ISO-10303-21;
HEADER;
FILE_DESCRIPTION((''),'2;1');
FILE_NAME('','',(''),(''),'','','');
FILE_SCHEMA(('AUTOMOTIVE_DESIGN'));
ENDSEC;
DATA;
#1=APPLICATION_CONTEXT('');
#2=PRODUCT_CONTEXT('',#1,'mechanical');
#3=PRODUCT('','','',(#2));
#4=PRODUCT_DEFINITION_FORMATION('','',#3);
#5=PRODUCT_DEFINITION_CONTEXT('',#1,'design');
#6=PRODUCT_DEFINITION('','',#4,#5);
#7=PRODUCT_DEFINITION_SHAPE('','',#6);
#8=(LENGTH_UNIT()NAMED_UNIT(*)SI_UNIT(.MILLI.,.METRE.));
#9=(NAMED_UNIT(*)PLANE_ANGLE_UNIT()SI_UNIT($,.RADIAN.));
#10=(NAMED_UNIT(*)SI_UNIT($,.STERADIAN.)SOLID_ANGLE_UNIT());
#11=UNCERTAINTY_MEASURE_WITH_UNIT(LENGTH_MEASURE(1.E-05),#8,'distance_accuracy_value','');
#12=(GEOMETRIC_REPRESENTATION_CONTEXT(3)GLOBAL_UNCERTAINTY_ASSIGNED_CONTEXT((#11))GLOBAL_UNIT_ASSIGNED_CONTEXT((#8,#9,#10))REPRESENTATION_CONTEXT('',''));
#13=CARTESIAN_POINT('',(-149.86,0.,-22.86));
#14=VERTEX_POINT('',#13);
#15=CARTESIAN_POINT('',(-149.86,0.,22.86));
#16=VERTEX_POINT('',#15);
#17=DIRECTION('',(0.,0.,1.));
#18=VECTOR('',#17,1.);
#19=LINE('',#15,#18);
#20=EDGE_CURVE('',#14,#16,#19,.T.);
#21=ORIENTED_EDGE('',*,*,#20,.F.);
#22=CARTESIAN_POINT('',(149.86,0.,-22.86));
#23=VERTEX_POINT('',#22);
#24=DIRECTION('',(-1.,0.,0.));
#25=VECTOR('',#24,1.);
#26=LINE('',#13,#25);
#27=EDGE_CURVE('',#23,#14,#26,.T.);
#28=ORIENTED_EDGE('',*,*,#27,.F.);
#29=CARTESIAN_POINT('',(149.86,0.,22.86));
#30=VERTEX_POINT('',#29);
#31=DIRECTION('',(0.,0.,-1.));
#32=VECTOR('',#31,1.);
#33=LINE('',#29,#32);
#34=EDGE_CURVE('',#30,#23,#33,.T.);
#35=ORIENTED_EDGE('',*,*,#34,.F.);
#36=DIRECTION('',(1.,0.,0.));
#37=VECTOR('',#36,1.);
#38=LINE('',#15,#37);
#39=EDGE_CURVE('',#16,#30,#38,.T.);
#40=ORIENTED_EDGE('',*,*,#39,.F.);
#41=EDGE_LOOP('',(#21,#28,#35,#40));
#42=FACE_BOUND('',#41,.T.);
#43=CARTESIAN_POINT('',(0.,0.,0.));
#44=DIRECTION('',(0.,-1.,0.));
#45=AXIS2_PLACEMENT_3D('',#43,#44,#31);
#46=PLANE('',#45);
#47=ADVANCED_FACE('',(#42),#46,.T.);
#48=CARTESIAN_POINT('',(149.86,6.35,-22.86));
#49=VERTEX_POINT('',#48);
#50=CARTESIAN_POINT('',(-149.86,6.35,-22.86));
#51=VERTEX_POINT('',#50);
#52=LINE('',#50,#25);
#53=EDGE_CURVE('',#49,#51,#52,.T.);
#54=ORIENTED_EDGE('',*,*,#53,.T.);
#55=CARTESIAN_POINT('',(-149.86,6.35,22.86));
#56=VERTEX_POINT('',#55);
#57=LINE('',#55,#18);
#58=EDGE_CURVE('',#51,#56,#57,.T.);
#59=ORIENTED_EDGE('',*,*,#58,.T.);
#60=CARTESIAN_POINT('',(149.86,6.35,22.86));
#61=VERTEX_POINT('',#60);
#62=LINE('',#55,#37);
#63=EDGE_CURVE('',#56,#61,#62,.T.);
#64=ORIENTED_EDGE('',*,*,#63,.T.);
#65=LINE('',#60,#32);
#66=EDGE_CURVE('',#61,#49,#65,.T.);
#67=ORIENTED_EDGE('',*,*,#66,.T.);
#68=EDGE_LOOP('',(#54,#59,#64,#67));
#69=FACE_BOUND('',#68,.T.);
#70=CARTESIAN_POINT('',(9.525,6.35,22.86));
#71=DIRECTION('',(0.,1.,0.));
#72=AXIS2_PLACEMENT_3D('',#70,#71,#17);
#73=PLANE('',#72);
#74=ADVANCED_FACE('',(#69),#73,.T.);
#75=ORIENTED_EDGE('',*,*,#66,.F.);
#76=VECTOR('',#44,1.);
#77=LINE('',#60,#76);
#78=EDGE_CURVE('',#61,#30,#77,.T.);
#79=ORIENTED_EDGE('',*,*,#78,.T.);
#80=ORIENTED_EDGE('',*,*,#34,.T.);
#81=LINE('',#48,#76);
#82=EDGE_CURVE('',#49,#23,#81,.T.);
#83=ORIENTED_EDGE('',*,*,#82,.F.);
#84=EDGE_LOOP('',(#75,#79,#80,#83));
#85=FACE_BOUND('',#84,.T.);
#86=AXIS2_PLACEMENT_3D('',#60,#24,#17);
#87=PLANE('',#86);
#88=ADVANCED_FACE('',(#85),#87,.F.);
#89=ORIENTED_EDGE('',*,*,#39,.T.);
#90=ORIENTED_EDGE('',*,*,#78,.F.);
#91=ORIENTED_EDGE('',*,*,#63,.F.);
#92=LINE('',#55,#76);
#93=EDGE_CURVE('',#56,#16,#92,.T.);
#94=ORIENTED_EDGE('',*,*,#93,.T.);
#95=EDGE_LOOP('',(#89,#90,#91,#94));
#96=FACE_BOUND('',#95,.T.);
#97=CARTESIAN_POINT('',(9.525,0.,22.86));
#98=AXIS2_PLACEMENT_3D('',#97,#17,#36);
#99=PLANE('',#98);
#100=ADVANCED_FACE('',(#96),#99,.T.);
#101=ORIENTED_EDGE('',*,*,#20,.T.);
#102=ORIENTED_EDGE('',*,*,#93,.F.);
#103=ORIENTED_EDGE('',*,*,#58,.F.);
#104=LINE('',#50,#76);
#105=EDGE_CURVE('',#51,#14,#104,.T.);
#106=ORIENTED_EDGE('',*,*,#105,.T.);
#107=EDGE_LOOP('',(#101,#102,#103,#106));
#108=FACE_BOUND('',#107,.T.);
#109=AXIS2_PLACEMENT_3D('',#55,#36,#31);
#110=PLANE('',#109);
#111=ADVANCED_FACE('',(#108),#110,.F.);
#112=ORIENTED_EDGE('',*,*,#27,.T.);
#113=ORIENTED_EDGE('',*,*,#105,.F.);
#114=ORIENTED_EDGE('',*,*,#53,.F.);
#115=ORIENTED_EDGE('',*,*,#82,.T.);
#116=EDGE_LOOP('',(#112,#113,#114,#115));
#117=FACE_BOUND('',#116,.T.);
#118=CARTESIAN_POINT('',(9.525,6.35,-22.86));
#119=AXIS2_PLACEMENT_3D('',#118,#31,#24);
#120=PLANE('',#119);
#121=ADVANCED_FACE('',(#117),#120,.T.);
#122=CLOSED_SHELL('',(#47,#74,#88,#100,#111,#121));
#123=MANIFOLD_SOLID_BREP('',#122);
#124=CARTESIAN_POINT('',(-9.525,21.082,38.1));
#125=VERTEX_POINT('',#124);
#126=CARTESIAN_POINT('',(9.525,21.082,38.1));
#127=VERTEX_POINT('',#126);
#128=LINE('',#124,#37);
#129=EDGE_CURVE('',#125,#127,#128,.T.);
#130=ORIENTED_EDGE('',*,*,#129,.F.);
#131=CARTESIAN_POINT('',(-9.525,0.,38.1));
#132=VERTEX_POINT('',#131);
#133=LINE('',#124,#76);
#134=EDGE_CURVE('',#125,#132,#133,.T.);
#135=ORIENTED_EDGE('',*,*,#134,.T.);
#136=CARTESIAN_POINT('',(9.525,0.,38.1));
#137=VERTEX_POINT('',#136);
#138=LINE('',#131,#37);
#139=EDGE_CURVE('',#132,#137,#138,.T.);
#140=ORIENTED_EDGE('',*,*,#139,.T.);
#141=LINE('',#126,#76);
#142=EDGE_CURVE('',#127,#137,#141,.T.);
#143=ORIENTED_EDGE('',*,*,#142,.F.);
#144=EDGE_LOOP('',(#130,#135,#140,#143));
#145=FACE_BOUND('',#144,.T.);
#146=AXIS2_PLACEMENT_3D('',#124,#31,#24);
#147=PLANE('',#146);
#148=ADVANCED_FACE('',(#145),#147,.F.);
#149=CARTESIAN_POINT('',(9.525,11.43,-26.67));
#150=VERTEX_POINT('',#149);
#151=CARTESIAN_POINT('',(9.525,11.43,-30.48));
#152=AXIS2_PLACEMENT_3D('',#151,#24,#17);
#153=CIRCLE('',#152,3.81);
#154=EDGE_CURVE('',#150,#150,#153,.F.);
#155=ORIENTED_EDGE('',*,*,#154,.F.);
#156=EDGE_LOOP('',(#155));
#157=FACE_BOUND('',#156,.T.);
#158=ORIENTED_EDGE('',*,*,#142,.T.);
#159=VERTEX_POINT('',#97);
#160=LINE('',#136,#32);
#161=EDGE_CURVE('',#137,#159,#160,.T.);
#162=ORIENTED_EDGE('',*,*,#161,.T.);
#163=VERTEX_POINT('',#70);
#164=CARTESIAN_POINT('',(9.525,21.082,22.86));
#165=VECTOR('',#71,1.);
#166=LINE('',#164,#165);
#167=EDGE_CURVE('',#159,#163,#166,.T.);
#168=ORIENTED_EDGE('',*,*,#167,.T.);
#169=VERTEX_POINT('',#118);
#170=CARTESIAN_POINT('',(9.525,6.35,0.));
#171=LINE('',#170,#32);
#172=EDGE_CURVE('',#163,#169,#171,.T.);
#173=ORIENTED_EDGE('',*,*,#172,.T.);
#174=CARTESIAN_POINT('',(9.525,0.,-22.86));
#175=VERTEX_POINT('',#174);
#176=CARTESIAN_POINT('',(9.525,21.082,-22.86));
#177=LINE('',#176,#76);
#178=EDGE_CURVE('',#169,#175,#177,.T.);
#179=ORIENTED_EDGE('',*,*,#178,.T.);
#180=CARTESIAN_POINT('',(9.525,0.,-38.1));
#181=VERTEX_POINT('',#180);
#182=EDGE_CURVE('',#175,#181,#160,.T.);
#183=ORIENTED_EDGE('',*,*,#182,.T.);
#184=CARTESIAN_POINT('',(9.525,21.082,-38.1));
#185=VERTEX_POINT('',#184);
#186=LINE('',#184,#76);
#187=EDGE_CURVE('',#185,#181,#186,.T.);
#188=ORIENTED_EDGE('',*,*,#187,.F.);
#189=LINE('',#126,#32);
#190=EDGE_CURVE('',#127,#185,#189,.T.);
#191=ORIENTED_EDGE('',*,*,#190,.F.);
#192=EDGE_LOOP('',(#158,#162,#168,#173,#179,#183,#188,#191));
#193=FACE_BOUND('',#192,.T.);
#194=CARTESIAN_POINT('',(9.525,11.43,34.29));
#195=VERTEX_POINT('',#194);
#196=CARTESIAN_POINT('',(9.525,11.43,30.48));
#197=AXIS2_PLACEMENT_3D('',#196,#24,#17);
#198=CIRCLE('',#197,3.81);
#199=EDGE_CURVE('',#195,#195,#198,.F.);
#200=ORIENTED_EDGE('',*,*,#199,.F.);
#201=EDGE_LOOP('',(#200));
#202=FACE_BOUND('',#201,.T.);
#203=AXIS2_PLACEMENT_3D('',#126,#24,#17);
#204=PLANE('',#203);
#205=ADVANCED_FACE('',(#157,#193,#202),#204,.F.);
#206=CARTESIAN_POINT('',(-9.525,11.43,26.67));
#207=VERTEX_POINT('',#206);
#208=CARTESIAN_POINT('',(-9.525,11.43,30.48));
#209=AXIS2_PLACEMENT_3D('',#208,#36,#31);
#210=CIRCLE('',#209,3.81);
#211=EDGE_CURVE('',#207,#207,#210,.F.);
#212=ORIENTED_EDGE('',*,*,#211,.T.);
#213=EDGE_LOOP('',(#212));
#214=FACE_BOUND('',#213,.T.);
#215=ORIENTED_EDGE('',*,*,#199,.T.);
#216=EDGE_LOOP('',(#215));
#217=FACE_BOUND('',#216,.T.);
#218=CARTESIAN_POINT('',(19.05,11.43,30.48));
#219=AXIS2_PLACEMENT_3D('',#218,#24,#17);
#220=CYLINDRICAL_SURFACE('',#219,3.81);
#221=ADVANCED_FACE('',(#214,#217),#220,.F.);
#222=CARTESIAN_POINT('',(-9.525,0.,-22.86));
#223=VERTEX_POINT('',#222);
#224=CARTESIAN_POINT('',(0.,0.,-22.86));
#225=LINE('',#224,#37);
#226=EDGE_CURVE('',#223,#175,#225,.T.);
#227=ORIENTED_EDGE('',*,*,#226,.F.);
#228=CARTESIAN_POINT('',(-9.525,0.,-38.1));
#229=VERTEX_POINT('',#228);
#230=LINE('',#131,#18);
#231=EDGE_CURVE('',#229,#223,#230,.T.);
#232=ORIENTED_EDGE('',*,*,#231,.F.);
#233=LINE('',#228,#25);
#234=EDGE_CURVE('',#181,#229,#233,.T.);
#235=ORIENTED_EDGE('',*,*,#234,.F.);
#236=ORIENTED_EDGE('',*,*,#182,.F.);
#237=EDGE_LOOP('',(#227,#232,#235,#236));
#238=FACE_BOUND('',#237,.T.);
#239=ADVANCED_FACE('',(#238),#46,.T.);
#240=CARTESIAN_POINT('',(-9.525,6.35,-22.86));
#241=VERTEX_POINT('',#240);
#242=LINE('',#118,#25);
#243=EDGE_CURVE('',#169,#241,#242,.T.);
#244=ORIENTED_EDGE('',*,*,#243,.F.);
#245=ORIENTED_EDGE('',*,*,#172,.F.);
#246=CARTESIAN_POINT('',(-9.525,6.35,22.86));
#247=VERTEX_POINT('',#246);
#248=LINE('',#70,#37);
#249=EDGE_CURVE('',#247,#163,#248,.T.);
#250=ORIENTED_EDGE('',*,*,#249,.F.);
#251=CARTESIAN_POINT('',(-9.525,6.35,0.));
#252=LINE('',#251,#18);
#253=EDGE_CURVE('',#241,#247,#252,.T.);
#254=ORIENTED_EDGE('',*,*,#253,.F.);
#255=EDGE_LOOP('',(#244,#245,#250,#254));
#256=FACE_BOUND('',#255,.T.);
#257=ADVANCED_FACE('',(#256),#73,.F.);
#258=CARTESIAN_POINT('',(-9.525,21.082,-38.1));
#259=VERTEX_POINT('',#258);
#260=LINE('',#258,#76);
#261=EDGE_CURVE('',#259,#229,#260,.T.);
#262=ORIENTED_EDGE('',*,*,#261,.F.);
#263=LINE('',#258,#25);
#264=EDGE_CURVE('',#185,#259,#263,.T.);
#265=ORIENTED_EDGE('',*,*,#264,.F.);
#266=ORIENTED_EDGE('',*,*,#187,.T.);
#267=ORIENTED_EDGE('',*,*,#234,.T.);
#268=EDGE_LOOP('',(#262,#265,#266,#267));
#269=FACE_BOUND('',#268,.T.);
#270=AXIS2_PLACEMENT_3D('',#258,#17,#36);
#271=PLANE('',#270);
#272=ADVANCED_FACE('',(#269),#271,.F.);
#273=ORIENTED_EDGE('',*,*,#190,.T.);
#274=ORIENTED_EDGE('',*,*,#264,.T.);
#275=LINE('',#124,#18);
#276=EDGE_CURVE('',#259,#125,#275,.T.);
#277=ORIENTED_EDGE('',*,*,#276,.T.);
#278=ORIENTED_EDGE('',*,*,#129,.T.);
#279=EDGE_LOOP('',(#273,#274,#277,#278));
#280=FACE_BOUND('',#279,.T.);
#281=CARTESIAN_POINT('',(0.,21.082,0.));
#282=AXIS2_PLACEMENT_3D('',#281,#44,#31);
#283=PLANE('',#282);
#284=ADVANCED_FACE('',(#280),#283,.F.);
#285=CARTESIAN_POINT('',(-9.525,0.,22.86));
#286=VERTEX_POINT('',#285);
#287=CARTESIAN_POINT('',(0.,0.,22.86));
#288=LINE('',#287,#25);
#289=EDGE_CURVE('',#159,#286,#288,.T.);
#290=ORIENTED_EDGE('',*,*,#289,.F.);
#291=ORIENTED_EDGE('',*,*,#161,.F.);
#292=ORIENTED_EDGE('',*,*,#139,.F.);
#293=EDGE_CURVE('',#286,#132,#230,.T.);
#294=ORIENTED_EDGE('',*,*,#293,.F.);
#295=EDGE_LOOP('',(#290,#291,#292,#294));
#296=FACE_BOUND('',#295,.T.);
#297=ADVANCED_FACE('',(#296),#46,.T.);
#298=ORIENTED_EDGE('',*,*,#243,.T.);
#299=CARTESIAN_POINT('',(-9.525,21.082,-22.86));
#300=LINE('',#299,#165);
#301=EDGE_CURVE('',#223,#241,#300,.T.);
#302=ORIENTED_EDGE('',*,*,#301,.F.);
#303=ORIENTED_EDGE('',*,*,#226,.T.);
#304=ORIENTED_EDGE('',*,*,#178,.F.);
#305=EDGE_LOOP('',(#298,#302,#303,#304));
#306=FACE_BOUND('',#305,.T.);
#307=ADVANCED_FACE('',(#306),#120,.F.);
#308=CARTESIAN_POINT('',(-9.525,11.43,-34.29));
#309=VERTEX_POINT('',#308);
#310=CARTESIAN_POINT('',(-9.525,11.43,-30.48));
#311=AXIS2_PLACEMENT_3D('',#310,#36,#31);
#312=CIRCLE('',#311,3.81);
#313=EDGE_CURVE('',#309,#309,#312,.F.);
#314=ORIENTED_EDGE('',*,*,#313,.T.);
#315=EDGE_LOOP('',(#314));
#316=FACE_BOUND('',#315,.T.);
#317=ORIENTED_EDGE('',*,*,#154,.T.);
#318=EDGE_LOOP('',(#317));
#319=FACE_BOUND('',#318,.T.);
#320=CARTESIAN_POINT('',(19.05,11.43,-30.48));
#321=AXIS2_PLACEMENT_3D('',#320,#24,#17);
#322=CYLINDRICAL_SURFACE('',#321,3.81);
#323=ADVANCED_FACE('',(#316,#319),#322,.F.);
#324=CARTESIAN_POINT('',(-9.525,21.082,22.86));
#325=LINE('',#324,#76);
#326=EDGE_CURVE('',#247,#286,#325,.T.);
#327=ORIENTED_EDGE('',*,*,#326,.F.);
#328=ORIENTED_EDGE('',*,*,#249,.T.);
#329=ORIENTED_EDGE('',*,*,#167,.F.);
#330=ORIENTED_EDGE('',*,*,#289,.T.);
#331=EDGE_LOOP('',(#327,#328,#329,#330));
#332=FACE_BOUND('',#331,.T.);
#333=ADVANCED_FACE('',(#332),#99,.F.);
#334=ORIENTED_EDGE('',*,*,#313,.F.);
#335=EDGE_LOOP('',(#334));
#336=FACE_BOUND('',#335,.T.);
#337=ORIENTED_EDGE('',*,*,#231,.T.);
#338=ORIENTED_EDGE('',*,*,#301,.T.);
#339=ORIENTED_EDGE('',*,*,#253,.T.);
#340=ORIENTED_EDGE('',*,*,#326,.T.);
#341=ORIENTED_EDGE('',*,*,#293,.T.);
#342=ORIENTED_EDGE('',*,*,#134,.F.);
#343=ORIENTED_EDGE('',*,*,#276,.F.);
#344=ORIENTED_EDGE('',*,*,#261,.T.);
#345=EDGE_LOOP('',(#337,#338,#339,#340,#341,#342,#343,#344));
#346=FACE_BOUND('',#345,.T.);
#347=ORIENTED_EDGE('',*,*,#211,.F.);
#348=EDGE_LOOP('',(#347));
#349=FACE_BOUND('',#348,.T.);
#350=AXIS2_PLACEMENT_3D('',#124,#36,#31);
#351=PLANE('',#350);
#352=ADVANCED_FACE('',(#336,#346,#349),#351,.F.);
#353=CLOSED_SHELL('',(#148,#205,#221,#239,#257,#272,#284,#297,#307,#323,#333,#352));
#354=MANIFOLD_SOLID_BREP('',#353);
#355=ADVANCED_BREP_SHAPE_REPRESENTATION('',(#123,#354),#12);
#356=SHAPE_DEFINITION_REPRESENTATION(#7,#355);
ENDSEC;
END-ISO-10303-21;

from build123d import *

# Parameters (mm, degrees)
SKETCH1_W            = 299.72
SKETCH1_H            = 45.72
SPRING_PLATE_DEPTH   = 6.35
SKETCH2_W            = 19.05
SKETCH2_H            = 76.2
SLOT_TAB_DEPTH       = 21.082
SPLIT1_START         = 6.35
SPLIT1_OUTLINE_W     = 19.05
SPLIT1_OUTLINE_H     = 76.2
SPLIT1_DEPTH         = 14.732
SPLIT1_2_OUTLINE_W   = 19.05
SPLIT1_2_OUTLINE_H   = 15.24
SPLIT1_2_DEPTH       = 6.35
SPLIT1_3_OUTLINE_W   = 19.05
SPLIT1_3_OUTLINE_H   = 76.2
SPLIT1_3_DEPTH       = 14.732
SPLIT1_4_OUTLINE_W   = 19.05
SPLIT1_4_OUTLINE_H   = 15.24
SPLIT1_4_DEPTH       = 6.35
ROD_SLOTS_DEPTH      = 19.05
ROD_SLOTS_DEPTH_BACK = 14.732
SKETCH3_R            = 3.81


# Read off the part's stored shape, not the designer's step: Split1
with BuildPart() as part:
    # Sketch1 → Spring Plate (new body)
    with BuildSketch(Plane(origin=(0, 0, 0), x_dir=(1, 0, 0), z_dir=(0, 1, 0))):
        Rectangle(SKETCH1_W, SKETCH1_H)
    extrude(amount=SPRING_PLATE_DEPTH)

    # Sketch2 → Slot Tab (add)
    with BuildSketch(Plane(origin=(0, 0, 0), x_dir=(1, 0, 0), z_dir=(0, 1, 0))):
        Rectangle(SKETCH2_W, SKETCH2_H)
    extrude(amount=SLOT_TAB_DEPTH)

    # Split1 outline → Split1 (cut)
    with BuildSketch(Plane(origin=(0, 0, 0), x_dir=(1, 0, 0), z_dir=(0, 1, 0)).offset(SPLIT1_START)):
        Rectangle(SPLIT1_OUTLINE_W, SPLIT1_OUTLINE_H)
    extrude(amount=SPLIT1_DEPTH, mode=Mode.SUBTRACT)

    # Split1 2 outline → Split1 2 (cut)
    with BuildSketch(Plane(origin=(0, 0, 0), x_dir=(1, 0, 0), z_dir=(0, 1, 0))):
        with Locations((0, -30.48)):
            Rectangle(SPLIT1_2_OUTLINE_W, SPLIT1_2_OUTLINE_H)
        with Locations((0, 30.48)):
            Rectangle(SPLIT1_2_OUTLINE_W, SPLIT1_2_OUTLINE_H)
    extrude(amount=SPLIT1_2_DEPTH, mode=Mode.SUBTRACT)


with BuildPart() as body_2:
    # Split1 3 outline → Split1 3 (new body)
    with BuildSketch(Plane(origin=(0, 0, 0), x_dir=(1, 0, 0), z_dir=(0, 1, 0)).offset(SPLIT1_START)):
        Rectangle(SPLIT1_3_OUTLINE_W, SPLIT1_3_OUTLINE_H)
    extrude(amount=SPLIT1_3_DEPTH)

    # Split1 4 outline → Split1 4 (add)
    with BuildSketch(Plane(origin=(0, 0, 0), x_dir=(1, 0, 0), z_dir=(0, 1, 0))):
        with Locations((0, -30.48)):
            Rectangle(SPLIT1_4_OUTLINE_W, SPLIT1_4_OUTLINE_H)
        with Locations((0, 30.48)):
            Rectangle(SPLIT1_4_OUTLINE_W, SPLIT1_4_OUTLINE_H)
    extrude(amount=SPLIT1_4_DEPTH)

    # Sketch3 → Rod Slots (cut, two sides: drawn at the far end of the back side and taken through both)
    with BuildSketch(Plane(origin=(0, 0, 0), x_dir=(0, 0, -1), z_dir=(1, 0, 0)).offset(-ROD_SLOTS_DEPTH_BACK)):
        with Locations(Location((-30.48, 11.43, 0), (0, 0, 180))):
            Circle(SKETCH3_R)
        with Locations(Location((30.48, 11.43, 0), (0, 0, 180))):
            Circle(SKETCH3_R)
    extrude(amount=ROD_SLOTS_DEPTH + ROD_SLOTS_DEPTH_BACK, mode=Mode.SUBTRACT)


solid = Compound([part.part, body_2.part])
